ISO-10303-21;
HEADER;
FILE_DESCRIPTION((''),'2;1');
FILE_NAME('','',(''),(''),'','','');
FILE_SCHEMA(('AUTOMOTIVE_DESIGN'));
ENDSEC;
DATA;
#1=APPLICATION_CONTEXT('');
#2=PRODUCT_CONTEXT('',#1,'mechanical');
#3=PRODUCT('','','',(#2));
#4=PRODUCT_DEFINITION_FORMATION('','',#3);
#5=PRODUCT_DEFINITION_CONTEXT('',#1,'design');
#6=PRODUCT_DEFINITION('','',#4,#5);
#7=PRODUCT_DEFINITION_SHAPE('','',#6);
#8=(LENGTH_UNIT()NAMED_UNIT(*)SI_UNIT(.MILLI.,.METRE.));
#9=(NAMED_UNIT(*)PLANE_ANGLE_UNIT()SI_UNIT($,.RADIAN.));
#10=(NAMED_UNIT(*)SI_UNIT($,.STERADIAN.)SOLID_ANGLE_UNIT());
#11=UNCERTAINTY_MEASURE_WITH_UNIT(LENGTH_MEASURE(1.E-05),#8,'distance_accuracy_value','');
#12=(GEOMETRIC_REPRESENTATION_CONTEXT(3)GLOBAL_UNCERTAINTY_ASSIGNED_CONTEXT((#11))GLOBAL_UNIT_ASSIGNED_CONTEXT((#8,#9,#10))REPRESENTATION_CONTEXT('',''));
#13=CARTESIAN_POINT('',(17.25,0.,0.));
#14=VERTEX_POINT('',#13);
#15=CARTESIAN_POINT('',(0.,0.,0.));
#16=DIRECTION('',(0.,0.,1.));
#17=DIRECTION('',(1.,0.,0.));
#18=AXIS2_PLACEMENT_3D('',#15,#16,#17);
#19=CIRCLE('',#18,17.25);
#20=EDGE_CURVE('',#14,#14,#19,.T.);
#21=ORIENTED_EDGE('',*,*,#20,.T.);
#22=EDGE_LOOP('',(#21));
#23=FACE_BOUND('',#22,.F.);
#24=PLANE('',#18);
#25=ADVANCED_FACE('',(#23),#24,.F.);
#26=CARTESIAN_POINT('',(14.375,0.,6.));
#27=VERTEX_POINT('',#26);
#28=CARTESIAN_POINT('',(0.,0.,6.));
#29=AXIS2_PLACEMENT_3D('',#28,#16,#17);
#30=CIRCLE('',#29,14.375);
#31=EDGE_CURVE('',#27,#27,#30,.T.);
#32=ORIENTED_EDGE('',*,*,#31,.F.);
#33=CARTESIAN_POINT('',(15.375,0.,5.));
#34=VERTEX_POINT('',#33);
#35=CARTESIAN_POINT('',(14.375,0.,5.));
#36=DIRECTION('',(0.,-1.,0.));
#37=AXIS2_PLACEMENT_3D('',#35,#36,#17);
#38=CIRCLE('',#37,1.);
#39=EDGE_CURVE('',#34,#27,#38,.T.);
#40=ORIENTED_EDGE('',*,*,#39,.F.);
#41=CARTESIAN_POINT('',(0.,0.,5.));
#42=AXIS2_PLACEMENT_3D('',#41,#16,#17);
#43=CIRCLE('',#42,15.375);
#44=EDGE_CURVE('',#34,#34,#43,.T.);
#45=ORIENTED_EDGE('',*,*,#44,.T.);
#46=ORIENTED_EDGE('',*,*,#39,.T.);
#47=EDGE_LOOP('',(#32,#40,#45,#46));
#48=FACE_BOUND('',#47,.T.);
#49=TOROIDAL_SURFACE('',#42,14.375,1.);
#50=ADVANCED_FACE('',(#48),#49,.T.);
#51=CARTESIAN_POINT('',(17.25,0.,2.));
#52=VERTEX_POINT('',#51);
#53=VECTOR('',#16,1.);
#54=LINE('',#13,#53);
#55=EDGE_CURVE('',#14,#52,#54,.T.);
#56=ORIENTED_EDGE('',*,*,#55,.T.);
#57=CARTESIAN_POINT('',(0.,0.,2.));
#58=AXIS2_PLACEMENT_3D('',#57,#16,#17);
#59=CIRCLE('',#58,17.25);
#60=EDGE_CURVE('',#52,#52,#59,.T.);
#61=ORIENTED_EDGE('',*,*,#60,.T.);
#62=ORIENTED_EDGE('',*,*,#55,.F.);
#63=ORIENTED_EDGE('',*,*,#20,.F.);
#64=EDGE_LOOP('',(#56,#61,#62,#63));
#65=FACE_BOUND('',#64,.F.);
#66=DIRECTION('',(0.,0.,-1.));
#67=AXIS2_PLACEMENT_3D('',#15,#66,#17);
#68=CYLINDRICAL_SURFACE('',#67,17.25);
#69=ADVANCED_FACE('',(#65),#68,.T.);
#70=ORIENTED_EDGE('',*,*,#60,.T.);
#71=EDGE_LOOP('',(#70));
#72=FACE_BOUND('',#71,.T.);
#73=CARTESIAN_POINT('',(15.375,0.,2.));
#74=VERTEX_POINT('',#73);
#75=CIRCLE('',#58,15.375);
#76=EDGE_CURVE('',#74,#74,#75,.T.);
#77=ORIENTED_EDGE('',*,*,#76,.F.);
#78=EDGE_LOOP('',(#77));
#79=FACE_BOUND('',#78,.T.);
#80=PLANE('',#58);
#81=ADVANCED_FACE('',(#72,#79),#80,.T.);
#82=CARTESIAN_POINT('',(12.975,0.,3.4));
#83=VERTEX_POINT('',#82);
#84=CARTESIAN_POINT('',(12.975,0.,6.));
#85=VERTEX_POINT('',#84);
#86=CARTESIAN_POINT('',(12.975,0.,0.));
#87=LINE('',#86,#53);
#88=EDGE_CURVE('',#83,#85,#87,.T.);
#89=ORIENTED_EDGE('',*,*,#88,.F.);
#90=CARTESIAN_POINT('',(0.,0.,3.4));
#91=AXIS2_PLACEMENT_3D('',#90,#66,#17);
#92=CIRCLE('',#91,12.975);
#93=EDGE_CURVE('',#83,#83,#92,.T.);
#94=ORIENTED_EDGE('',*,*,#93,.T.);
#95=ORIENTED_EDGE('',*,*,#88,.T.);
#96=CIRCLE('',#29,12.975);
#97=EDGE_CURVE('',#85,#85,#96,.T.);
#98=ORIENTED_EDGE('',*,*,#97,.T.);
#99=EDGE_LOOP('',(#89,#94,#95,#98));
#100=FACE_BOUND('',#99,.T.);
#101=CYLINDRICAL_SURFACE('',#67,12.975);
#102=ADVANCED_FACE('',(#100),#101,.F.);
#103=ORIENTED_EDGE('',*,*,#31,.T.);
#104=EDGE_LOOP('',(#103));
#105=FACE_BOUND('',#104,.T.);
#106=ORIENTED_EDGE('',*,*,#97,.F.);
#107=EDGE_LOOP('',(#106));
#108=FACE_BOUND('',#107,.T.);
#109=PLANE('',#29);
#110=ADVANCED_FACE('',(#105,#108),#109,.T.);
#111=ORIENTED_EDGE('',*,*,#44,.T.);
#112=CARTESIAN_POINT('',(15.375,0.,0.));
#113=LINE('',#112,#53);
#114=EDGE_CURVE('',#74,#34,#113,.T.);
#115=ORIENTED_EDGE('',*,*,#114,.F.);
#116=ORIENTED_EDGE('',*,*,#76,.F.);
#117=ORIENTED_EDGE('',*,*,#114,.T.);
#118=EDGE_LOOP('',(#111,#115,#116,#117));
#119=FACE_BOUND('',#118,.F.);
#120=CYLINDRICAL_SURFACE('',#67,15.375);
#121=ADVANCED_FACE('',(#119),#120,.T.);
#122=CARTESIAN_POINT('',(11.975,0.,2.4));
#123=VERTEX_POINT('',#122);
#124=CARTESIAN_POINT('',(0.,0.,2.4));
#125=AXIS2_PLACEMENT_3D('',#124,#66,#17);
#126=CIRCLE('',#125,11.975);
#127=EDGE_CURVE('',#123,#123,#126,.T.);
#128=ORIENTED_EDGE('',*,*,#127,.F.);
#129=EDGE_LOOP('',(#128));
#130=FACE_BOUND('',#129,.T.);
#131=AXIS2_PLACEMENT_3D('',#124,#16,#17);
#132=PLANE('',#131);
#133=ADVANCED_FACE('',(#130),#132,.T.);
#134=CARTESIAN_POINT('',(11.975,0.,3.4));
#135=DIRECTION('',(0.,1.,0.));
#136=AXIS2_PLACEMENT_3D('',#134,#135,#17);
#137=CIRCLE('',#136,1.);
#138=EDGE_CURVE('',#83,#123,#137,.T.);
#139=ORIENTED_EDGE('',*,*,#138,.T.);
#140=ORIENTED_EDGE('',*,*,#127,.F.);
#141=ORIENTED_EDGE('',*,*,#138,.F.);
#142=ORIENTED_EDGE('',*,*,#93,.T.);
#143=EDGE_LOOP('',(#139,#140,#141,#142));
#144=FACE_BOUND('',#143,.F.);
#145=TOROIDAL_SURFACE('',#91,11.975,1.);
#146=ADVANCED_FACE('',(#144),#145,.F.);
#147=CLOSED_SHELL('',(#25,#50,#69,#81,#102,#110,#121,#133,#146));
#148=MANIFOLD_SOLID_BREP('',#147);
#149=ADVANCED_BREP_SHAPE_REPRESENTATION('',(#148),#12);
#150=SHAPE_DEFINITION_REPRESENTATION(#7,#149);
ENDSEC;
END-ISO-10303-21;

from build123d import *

# Parameters (mm, degrees)
F0_R     = 15.375
F1_DEPTH = 6
F0_R_2   = 17.25
F2_DEPTH = 2
F3_T     = -2.4
F4_R     = 1


with BuildPart() as f1:
    # F0 (on Top) → F1 (new body)
    with BuildSketch(Plane.XY):
        Circle(F0_R)
    extrude(amount=F1_DEPTH)

    # F0 (on Top) → F2 (join)
    with BuildSketch(Plane.XY):
        Circle(F0_R_2)
        Circle(F0_R, mode=Mode.SUBTRACT)
    extrude(amount=F2_DEPTH)

    # F3
    f3_openings = [f1.faces().sort_by_distance(p)[0] for p in [
        (0, 0, 6),
    ]]
    offset(amount=F3_T, openings=f3_openings)

    # F4
    f4_edges = [f1.edges().sort_by_distance(p)[0] for p in [
        (-15.375, 0, 6),
        (-12.975, 0, 2.4),
    ]]
    fillet(f4_edges, radius=F4_R)


solid = f1.part
